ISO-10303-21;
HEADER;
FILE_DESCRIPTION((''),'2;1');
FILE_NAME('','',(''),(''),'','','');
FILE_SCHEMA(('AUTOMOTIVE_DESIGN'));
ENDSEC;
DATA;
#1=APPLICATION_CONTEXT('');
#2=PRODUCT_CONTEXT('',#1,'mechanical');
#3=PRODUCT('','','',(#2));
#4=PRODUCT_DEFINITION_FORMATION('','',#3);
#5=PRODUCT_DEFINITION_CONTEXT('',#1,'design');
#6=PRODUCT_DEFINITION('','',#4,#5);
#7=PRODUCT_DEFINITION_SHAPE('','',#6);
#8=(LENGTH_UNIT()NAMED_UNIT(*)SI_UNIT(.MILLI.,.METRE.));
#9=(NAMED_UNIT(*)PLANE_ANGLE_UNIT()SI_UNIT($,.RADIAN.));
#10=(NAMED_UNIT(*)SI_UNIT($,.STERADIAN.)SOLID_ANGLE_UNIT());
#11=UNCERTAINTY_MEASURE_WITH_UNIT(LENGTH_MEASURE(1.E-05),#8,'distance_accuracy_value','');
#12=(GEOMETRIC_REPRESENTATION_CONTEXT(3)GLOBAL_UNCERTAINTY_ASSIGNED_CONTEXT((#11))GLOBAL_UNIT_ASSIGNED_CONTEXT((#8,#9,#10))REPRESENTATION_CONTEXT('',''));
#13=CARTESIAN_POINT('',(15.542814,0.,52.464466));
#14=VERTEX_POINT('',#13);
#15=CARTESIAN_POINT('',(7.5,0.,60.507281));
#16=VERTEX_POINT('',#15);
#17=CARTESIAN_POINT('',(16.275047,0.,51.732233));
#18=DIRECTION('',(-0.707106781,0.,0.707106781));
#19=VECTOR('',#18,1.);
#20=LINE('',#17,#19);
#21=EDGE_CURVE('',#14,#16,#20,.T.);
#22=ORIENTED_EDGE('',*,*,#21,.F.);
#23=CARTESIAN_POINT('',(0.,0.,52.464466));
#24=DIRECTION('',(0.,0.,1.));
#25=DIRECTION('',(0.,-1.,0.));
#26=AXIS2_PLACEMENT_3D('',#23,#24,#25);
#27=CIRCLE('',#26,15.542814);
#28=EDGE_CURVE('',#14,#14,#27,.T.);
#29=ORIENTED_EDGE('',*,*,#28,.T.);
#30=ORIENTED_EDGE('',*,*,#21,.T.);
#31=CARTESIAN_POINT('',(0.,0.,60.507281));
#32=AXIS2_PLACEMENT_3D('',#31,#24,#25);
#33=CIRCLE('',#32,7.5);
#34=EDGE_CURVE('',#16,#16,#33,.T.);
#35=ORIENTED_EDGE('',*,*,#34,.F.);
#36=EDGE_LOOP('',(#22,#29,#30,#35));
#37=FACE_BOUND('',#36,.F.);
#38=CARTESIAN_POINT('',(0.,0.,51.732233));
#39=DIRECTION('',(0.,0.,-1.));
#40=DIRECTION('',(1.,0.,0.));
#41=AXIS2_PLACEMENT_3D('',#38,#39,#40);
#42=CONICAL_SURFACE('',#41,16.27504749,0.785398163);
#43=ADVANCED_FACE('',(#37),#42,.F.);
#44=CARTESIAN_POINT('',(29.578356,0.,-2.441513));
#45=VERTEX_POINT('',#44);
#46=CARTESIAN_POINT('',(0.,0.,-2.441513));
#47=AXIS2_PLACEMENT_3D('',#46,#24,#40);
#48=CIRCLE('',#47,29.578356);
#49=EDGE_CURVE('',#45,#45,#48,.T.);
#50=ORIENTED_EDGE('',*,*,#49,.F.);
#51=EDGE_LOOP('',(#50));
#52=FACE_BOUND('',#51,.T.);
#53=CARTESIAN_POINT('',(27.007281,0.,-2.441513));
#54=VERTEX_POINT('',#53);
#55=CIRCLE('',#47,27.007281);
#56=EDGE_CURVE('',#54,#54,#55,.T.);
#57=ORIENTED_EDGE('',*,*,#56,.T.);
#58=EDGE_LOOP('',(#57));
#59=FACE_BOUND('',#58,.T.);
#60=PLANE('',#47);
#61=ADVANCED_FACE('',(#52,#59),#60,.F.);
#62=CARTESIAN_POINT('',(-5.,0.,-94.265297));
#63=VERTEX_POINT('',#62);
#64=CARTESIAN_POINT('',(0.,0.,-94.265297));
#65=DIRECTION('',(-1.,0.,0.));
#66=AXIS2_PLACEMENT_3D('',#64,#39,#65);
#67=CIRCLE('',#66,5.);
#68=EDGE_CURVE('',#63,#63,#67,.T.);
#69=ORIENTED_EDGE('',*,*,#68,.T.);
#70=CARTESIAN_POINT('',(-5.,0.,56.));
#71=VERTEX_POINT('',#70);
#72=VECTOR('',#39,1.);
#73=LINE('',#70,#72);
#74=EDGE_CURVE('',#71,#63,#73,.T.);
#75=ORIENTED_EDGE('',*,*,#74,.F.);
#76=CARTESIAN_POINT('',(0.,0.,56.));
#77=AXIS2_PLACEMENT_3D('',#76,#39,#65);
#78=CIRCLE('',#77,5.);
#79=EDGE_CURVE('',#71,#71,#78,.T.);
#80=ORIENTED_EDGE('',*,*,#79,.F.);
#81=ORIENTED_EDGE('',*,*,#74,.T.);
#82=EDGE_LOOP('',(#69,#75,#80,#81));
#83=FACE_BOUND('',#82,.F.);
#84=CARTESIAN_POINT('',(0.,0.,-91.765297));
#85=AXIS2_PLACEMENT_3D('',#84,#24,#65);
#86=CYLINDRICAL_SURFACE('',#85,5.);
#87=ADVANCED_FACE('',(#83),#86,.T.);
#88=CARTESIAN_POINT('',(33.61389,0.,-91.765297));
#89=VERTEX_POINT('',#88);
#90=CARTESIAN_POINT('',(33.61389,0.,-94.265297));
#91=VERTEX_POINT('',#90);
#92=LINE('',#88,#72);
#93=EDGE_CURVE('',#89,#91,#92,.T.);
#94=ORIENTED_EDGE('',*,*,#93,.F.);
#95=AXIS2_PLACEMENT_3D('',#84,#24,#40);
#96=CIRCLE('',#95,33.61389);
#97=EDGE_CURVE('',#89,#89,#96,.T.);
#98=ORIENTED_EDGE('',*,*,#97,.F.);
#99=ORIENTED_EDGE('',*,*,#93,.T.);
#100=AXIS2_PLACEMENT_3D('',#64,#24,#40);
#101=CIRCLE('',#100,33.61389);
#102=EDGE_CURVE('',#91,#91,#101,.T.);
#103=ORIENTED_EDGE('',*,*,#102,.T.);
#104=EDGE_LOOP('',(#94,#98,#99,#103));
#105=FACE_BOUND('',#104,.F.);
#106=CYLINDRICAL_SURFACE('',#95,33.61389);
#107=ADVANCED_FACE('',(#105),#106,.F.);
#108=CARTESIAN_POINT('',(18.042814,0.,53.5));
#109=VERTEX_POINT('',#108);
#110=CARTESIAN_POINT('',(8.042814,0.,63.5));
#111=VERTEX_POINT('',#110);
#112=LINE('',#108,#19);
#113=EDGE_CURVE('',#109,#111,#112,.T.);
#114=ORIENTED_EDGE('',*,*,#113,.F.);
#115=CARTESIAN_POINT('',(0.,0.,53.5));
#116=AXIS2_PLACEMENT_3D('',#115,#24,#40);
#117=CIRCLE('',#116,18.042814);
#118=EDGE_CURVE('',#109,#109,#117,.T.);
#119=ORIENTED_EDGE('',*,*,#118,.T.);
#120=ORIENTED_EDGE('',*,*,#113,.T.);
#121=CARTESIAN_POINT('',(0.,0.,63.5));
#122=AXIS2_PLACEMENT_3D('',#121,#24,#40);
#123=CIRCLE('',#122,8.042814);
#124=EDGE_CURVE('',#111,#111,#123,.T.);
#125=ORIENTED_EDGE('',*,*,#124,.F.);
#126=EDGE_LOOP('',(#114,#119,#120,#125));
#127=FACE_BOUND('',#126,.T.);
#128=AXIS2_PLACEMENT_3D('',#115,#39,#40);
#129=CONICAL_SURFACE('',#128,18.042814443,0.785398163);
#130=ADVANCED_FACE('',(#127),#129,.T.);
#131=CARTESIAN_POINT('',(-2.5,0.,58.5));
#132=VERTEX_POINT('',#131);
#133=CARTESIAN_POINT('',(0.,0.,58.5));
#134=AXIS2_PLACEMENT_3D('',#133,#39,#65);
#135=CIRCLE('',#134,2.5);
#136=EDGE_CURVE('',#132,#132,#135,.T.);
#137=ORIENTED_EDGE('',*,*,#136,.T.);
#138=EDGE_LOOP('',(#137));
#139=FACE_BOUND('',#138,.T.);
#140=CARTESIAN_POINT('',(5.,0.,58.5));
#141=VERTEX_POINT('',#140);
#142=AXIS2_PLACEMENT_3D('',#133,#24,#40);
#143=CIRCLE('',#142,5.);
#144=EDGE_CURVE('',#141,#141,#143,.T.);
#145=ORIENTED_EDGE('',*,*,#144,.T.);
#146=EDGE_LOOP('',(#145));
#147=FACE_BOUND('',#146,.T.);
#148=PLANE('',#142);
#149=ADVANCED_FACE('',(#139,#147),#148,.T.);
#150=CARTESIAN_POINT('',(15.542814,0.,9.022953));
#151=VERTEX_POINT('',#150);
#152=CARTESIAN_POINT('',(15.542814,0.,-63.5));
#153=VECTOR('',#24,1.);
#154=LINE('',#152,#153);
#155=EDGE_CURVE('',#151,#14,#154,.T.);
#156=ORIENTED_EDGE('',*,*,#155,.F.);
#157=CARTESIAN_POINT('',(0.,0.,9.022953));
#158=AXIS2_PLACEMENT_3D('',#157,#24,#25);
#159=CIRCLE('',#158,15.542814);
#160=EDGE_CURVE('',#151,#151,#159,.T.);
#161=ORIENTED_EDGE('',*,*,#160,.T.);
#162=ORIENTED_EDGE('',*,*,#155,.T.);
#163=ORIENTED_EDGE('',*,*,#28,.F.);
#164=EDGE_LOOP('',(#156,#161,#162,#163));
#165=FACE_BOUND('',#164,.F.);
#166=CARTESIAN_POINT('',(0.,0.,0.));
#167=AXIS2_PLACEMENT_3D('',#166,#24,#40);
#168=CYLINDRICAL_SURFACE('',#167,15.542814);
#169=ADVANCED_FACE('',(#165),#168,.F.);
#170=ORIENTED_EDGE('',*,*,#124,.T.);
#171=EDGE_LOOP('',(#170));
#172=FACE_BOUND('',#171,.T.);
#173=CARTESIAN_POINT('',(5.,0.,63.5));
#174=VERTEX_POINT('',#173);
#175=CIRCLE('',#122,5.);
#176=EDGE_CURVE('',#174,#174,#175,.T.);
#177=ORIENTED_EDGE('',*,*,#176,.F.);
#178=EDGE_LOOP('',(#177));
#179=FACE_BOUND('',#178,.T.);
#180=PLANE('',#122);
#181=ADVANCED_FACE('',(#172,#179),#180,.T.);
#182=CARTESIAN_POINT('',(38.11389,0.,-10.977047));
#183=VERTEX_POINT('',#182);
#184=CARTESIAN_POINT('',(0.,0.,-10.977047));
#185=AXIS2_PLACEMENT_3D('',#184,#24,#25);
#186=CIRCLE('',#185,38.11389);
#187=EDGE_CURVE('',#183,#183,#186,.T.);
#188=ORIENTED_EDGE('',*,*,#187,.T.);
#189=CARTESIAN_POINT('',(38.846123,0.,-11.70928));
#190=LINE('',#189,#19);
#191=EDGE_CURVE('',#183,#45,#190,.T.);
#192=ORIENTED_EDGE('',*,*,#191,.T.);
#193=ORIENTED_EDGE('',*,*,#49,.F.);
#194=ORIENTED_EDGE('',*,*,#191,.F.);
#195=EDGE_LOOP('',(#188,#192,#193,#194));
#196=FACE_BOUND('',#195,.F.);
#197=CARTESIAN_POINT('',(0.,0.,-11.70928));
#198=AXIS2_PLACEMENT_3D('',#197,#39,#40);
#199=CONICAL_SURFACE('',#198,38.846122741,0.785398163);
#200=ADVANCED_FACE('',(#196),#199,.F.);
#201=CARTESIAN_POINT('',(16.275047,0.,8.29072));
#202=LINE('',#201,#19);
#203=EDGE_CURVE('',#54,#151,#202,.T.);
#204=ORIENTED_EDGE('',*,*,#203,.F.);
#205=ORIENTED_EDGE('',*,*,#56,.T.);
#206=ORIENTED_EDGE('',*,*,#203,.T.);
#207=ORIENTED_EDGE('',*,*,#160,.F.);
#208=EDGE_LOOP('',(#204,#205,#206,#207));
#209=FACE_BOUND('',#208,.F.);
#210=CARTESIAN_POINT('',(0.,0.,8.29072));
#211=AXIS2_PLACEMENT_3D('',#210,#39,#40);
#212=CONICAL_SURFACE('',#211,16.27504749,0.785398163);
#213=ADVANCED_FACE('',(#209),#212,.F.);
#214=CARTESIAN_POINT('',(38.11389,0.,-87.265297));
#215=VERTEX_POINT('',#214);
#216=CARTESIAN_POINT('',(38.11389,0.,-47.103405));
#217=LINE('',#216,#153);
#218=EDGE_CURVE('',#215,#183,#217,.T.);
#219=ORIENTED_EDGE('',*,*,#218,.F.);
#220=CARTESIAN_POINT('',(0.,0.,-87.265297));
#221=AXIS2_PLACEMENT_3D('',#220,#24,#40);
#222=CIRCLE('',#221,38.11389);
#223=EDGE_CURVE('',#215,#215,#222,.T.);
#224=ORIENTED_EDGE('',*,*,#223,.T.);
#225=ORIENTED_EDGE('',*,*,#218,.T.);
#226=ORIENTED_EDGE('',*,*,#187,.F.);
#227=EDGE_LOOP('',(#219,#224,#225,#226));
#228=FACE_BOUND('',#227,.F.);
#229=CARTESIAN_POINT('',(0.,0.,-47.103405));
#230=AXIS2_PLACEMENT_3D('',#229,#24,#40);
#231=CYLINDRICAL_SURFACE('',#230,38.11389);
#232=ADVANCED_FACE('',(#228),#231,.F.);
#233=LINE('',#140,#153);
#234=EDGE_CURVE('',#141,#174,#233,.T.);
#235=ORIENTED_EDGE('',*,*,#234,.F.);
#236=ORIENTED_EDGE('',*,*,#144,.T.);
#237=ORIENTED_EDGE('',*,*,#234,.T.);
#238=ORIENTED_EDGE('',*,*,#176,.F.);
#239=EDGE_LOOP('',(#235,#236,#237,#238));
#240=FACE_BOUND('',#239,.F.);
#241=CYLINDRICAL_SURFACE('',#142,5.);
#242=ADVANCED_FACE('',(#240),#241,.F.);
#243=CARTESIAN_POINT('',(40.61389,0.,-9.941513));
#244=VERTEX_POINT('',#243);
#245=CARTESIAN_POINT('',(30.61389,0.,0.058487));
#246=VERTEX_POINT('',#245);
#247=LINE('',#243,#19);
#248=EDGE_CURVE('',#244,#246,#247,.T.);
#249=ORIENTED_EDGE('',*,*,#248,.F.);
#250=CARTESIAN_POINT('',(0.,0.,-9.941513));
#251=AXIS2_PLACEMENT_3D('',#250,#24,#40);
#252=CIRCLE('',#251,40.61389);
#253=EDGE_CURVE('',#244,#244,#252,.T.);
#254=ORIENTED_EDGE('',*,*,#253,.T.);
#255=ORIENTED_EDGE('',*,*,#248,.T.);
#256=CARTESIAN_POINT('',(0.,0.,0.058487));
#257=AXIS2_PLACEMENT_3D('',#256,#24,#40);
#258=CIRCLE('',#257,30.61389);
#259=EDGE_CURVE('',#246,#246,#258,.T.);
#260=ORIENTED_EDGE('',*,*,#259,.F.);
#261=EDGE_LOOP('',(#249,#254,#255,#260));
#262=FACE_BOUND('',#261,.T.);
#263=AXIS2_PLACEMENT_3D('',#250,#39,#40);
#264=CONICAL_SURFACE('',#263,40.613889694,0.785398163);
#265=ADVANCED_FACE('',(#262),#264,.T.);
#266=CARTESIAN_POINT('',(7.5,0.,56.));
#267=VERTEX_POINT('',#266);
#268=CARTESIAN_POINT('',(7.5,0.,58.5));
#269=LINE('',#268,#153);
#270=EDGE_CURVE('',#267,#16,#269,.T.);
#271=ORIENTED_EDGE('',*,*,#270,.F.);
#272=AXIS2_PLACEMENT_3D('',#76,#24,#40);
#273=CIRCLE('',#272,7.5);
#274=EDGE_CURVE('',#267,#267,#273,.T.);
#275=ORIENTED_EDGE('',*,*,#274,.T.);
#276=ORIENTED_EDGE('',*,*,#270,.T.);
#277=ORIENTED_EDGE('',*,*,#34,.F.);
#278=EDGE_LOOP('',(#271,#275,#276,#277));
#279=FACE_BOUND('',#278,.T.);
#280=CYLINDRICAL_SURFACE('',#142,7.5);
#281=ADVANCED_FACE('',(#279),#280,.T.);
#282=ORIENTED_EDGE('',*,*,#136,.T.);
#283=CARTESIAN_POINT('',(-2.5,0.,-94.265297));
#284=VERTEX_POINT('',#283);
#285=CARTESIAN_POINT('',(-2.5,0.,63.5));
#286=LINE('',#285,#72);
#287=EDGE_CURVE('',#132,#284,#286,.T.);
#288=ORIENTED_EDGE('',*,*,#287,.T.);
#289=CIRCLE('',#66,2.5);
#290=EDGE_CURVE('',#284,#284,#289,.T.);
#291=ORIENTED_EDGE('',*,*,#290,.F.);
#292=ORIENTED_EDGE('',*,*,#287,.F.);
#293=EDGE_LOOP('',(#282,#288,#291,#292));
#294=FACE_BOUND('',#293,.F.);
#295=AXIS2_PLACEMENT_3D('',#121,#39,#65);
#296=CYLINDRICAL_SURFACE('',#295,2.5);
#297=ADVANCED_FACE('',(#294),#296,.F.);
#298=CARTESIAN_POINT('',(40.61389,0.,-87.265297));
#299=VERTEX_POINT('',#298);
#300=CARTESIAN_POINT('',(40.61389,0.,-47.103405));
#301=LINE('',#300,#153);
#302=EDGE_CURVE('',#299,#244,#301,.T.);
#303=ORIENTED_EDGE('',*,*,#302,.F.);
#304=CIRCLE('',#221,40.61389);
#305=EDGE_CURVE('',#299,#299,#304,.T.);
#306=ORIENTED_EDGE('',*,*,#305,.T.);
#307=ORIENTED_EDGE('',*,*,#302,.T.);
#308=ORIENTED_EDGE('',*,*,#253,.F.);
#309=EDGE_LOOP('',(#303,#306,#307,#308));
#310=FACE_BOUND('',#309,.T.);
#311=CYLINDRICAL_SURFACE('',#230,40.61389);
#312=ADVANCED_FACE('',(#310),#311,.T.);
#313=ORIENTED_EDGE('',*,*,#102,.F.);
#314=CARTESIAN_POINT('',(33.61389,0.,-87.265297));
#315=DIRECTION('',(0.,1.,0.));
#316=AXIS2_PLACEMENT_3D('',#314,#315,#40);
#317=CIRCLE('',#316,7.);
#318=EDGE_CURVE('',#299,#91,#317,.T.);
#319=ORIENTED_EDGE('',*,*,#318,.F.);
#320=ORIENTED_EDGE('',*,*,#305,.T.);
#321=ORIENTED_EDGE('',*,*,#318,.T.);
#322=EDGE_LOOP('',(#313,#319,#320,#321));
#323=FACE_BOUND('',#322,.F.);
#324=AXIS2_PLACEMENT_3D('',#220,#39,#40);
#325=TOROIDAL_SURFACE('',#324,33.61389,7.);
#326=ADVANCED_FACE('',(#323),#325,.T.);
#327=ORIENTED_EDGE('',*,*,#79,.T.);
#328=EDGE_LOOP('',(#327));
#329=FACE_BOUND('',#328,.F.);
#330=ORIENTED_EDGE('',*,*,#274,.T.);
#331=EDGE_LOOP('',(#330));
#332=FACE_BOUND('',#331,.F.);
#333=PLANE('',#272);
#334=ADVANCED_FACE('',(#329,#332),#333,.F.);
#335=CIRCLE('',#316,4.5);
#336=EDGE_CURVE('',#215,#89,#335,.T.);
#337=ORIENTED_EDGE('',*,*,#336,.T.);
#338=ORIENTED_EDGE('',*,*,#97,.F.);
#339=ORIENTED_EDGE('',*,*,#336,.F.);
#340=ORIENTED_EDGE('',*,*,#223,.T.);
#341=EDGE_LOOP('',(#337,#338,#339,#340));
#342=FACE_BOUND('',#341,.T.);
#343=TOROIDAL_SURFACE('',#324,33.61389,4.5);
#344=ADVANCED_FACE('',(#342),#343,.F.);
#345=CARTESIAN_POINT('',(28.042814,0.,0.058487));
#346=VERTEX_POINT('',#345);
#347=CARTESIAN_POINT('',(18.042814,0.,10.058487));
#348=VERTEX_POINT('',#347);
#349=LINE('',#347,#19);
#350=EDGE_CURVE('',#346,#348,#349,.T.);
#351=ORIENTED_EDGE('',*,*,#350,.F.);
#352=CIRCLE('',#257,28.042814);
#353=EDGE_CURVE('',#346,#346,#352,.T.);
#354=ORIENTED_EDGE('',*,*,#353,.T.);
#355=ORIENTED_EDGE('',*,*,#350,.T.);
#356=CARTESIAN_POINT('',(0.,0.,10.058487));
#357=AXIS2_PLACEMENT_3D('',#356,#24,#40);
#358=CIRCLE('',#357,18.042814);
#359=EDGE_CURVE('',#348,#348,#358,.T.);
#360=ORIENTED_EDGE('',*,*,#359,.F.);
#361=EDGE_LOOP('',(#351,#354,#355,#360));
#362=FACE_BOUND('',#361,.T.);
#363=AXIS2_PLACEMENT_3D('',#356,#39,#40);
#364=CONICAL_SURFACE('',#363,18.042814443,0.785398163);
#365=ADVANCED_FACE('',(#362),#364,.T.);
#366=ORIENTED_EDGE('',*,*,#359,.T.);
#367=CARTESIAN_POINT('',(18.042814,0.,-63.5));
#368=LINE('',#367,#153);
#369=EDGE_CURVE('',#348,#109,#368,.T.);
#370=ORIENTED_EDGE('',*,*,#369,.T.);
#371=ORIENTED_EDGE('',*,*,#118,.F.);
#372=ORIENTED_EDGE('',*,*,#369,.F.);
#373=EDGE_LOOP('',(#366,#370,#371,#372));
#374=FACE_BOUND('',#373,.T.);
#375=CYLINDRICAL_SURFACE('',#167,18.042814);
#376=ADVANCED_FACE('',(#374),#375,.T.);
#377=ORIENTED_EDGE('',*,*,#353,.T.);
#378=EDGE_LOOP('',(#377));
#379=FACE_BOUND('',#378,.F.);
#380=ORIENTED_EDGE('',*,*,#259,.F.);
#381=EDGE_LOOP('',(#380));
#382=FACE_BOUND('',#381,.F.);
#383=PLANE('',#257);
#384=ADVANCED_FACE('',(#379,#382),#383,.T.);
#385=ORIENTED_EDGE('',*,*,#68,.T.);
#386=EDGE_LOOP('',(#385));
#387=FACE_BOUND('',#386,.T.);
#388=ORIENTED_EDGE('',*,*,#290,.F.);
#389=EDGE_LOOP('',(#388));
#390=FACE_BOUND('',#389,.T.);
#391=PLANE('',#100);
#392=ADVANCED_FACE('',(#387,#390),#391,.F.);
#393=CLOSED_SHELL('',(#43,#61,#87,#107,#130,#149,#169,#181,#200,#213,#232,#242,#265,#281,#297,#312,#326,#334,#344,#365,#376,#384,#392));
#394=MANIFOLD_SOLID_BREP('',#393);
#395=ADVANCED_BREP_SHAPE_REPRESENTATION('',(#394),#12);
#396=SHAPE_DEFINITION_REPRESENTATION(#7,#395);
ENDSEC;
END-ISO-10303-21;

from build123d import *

# Parameters (mm, degrees)
F0_R           = 18.0428144426
F1_DEPTH       = 63.5
F2_W           = 40.2940958738
F2_H           = 94.3237841129
F4_SIZE        = 10
F6_D           = 5
F6_CBORE_D     = 10
F6_CBORE_DEPTH = 5
F7_R           = 7
F8_T           = -2.5


# Not quite as in the source:
# - a shell that OpenCascade refuses in one call is made with other operations: the cavity is built on its own and cut out


with BuildPart() as f1:
    # F0 (on Top) → F1 (new body, symmetric)
    with BuildSketch(Plane.XY):
        Circle(F0_R)
    extrude(amount=F1_DEPTH, both=True)

    # F2 (on Front) → F3 (revolve)
    with BuildSketch(Plane.XZ):
        with Locations((20.4668417573, -47.1034049988)):
            Rectangle(F2_W, F2_H)
    revolve(axis=Axis((0, 0, 0), (0, 0, 1)))

    # F4
    f4_edges = [f1.edges().sort_by_distance(p)[0] for p in [
        (-40.61389, 0, 0.058487),
        (-18.042814, 0, 0.058487),
        (18.042814, 0, 31.779244),
        (-18.042814, 0, 63.5),
    ]]
    chamfer(f4_edges, length=F4_SIZE)

    # F6 (through all)
    with Locations(Plane.XY.offset(63.5)):
        with Locations((0, 0)):
            CounterBoreHole(F6_D / 2, F6_CBORE_D / 2, F6_CBORE_DEPTH)

    # F7
    f7_edges = [f1.edges().sort_by_distance(p)[0] for p in [
        (-40.61389, 0, -94.265297),
    ]]
    fillet(f7_edges, radius=F7_R)

    # F8: a shell. OpenCascade refuses it in one call, so the cavity is built on its own and cut out:
    # the body offset inwards by the wall thickness, plus a prism from it out through each open face.
    f8_core = offset(f1.part, amount=F8_T, kind=Kind.INTERSECTION, mode=Mode.PRIVATE)
    f8_exits = [f8_core.faces().sort_by_distance(p)[0] for p in [
        (-5.950744, 0, -91.765297),
    ]]
    add(f8_core, mode=Mode.SUBTRACT)
    extrude(f8_exits, amount=-F8_T, mode=Mode.SUBTRACT)


solid = f1.part
